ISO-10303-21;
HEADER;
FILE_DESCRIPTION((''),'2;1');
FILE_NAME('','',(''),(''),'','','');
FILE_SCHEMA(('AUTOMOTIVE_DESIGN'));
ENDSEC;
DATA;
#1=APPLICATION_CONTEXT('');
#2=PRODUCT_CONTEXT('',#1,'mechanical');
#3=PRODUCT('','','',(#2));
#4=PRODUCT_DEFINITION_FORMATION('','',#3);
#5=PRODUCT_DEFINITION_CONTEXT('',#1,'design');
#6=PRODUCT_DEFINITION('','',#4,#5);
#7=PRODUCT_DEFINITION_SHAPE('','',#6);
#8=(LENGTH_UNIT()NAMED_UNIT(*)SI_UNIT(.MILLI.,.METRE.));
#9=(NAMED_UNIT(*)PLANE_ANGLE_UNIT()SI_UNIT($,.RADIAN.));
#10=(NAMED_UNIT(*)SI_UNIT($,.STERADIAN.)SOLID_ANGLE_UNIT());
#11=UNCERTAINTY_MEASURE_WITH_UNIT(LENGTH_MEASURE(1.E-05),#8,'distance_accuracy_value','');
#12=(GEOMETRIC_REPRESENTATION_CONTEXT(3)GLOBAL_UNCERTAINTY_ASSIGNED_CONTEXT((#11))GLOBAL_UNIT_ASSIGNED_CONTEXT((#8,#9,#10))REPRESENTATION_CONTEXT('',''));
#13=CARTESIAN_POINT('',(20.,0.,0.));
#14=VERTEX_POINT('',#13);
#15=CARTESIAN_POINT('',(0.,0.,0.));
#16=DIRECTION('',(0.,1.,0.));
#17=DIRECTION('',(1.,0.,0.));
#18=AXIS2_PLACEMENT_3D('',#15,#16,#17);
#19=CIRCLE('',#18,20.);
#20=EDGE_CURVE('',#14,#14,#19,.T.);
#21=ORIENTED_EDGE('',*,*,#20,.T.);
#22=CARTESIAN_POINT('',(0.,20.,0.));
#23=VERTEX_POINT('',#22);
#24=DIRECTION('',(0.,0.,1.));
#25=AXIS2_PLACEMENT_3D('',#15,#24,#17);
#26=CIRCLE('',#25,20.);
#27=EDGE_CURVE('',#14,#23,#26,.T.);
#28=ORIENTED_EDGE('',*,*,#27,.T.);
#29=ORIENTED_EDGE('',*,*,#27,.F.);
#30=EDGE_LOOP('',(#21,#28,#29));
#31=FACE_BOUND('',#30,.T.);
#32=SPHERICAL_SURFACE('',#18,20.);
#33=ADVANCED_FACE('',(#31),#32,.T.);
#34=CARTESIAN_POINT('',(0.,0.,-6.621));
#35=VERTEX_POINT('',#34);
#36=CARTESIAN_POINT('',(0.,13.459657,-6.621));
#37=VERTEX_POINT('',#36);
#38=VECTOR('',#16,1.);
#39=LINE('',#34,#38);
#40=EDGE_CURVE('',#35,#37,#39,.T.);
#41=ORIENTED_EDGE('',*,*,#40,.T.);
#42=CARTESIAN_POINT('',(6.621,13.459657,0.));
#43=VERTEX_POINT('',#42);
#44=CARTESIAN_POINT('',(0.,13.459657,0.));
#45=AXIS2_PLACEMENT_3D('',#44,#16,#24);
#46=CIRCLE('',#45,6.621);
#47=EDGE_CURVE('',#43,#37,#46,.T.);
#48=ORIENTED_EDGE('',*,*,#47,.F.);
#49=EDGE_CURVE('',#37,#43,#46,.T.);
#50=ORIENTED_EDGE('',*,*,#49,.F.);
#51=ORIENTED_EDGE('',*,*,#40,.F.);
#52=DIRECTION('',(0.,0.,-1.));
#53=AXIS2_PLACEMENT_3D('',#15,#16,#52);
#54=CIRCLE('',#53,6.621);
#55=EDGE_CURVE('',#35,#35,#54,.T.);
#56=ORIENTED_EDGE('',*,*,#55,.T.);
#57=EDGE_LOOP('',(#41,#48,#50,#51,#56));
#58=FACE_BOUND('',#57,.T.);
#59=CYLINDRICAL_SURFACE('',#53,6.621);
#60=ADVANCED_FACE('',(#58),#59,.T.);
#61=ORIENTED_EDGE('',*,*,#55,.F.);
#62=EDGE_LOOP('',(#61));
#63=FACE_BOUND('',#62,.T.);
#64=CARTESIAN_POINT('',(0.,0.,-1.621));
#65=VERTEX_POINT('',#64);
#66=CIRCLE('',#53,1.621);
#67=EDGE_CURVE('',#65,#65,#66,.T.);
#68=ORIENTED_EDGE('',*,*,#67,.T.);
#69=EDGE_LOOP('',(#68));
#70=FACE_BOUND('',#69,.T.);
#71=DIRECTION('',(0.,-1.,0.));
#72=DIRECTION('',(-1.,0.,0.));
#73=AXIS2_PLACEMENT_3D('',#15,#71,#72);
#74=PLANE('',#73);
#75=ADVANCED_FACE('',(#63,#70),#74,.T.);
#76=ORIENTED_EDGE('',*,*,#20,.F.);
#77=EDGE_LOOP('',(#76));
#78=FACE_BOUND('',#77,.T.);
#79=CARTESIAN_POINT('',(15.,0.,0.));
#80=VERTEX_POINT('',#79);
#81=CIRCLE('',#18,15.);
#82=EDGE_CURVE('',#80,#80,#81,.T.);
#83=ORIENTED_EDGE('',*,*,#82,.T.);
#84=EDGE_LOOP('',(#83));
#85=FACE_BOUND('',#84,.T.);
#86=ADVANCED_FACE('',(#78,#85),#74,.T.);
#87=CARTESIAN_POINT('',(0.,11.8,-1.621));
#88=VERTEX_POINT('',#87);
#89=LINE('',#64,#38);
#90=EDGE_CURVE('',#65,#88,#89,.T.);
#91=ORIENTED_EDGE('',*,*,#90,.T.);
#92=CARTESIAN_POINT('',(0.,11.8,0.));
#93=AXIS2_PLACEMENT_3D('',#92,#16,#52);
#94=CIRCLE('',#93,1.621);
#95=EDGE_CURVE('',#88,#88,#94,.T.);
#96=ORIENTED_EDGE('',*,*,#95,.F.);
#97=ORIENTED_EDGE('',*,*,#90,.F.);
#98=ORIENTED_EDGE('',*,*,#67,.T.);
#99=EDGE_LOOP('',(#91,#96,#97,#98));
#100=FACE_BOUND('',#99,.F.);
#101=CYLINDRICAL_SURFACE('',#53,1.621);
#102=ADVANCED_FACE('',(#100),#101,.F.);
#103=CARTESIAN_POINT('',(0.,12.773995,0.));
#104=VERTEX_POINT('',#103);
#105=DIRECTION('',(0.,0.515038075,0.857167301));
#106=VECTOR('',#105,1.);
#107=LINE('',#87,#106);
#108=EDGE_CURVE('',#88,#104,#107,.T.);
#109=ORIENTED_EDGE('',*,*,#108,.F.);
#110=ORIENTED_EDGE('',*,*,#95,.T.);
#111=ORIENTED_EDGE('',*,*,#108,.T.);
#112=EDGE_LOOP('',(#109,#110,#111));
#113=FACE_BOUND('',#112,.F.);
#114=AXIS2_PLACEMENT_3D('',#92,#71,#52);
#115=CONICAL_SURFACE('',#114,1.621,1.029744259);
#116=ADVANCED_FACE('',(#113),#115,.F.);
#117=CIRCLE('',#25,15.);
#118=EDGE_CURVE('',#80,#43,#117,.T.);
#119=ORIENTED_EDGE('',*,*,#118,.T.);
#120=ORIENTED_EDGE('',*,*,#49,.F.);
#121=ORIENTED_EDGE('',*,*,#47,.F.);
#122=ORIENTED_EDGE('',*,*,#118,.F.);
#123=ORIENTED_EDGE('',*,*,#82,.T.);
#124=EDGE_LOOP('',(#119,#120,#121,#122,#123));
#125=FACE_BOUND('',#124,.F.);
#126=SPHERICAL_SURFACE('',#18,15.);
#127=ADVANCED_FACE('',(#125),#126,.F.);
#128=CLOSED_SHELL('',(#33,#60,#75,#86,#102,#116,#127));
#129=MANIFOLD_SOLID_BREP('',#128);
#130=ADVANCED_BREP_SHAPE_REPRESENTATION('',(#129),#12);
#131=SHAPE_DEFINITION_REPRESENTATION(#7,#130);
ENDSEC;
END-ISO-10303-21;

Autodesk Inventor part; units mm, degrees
ref_plane "YZ Plane" through (0, 0, 0) normal (1, 0, 0) x (0, 1, 0)
ref_plane "XZ Plane" through (0, 0, 0) normal (0, 1, 0) x (-1, 0, 0)
ref_plane "XY Plane" through (0, 0, 0) normal (0, 0, 1) x (1, 0, 0)
sketch "Sketch1" plane through (0, 0, 0) normal (0, 0, 1) x (1, 0, 0)
  line L0 (0, 0) -> (0, 20)
  line L1 (0, 0) -> (20, 0)
  arc A0 (20, 0) -> (0, 20) centre (0, 0) ccw
  line L2 (0, -4.8284) -> (0, 28.9706) projected
  dimension "d2" = 20
revolve "Revolution1" add sketch "Sketch1" angle 360 about axis through (0, -10, 0) along (0, 1, 0)
sketch "Sketch4" plane through (0, 0, 0) normal (0, -1, 0) x (1, 0, 0)
  point P0 (0, 0)
  point P1 (0, 0)
hole "Hole2" at (0, 0, 0) direction (0, 1, 0) diameter 3.242 depth 11.8 tip angle 118 thread size "M4x0.7" class "6H" standard "ANSI Metric M Profile"
shell "Shell2" thickness 5 removed faces 1 at (13.676, 0, 1.6606)
properties part number "Ball_Upper Half" material "Nylon 6/6"
